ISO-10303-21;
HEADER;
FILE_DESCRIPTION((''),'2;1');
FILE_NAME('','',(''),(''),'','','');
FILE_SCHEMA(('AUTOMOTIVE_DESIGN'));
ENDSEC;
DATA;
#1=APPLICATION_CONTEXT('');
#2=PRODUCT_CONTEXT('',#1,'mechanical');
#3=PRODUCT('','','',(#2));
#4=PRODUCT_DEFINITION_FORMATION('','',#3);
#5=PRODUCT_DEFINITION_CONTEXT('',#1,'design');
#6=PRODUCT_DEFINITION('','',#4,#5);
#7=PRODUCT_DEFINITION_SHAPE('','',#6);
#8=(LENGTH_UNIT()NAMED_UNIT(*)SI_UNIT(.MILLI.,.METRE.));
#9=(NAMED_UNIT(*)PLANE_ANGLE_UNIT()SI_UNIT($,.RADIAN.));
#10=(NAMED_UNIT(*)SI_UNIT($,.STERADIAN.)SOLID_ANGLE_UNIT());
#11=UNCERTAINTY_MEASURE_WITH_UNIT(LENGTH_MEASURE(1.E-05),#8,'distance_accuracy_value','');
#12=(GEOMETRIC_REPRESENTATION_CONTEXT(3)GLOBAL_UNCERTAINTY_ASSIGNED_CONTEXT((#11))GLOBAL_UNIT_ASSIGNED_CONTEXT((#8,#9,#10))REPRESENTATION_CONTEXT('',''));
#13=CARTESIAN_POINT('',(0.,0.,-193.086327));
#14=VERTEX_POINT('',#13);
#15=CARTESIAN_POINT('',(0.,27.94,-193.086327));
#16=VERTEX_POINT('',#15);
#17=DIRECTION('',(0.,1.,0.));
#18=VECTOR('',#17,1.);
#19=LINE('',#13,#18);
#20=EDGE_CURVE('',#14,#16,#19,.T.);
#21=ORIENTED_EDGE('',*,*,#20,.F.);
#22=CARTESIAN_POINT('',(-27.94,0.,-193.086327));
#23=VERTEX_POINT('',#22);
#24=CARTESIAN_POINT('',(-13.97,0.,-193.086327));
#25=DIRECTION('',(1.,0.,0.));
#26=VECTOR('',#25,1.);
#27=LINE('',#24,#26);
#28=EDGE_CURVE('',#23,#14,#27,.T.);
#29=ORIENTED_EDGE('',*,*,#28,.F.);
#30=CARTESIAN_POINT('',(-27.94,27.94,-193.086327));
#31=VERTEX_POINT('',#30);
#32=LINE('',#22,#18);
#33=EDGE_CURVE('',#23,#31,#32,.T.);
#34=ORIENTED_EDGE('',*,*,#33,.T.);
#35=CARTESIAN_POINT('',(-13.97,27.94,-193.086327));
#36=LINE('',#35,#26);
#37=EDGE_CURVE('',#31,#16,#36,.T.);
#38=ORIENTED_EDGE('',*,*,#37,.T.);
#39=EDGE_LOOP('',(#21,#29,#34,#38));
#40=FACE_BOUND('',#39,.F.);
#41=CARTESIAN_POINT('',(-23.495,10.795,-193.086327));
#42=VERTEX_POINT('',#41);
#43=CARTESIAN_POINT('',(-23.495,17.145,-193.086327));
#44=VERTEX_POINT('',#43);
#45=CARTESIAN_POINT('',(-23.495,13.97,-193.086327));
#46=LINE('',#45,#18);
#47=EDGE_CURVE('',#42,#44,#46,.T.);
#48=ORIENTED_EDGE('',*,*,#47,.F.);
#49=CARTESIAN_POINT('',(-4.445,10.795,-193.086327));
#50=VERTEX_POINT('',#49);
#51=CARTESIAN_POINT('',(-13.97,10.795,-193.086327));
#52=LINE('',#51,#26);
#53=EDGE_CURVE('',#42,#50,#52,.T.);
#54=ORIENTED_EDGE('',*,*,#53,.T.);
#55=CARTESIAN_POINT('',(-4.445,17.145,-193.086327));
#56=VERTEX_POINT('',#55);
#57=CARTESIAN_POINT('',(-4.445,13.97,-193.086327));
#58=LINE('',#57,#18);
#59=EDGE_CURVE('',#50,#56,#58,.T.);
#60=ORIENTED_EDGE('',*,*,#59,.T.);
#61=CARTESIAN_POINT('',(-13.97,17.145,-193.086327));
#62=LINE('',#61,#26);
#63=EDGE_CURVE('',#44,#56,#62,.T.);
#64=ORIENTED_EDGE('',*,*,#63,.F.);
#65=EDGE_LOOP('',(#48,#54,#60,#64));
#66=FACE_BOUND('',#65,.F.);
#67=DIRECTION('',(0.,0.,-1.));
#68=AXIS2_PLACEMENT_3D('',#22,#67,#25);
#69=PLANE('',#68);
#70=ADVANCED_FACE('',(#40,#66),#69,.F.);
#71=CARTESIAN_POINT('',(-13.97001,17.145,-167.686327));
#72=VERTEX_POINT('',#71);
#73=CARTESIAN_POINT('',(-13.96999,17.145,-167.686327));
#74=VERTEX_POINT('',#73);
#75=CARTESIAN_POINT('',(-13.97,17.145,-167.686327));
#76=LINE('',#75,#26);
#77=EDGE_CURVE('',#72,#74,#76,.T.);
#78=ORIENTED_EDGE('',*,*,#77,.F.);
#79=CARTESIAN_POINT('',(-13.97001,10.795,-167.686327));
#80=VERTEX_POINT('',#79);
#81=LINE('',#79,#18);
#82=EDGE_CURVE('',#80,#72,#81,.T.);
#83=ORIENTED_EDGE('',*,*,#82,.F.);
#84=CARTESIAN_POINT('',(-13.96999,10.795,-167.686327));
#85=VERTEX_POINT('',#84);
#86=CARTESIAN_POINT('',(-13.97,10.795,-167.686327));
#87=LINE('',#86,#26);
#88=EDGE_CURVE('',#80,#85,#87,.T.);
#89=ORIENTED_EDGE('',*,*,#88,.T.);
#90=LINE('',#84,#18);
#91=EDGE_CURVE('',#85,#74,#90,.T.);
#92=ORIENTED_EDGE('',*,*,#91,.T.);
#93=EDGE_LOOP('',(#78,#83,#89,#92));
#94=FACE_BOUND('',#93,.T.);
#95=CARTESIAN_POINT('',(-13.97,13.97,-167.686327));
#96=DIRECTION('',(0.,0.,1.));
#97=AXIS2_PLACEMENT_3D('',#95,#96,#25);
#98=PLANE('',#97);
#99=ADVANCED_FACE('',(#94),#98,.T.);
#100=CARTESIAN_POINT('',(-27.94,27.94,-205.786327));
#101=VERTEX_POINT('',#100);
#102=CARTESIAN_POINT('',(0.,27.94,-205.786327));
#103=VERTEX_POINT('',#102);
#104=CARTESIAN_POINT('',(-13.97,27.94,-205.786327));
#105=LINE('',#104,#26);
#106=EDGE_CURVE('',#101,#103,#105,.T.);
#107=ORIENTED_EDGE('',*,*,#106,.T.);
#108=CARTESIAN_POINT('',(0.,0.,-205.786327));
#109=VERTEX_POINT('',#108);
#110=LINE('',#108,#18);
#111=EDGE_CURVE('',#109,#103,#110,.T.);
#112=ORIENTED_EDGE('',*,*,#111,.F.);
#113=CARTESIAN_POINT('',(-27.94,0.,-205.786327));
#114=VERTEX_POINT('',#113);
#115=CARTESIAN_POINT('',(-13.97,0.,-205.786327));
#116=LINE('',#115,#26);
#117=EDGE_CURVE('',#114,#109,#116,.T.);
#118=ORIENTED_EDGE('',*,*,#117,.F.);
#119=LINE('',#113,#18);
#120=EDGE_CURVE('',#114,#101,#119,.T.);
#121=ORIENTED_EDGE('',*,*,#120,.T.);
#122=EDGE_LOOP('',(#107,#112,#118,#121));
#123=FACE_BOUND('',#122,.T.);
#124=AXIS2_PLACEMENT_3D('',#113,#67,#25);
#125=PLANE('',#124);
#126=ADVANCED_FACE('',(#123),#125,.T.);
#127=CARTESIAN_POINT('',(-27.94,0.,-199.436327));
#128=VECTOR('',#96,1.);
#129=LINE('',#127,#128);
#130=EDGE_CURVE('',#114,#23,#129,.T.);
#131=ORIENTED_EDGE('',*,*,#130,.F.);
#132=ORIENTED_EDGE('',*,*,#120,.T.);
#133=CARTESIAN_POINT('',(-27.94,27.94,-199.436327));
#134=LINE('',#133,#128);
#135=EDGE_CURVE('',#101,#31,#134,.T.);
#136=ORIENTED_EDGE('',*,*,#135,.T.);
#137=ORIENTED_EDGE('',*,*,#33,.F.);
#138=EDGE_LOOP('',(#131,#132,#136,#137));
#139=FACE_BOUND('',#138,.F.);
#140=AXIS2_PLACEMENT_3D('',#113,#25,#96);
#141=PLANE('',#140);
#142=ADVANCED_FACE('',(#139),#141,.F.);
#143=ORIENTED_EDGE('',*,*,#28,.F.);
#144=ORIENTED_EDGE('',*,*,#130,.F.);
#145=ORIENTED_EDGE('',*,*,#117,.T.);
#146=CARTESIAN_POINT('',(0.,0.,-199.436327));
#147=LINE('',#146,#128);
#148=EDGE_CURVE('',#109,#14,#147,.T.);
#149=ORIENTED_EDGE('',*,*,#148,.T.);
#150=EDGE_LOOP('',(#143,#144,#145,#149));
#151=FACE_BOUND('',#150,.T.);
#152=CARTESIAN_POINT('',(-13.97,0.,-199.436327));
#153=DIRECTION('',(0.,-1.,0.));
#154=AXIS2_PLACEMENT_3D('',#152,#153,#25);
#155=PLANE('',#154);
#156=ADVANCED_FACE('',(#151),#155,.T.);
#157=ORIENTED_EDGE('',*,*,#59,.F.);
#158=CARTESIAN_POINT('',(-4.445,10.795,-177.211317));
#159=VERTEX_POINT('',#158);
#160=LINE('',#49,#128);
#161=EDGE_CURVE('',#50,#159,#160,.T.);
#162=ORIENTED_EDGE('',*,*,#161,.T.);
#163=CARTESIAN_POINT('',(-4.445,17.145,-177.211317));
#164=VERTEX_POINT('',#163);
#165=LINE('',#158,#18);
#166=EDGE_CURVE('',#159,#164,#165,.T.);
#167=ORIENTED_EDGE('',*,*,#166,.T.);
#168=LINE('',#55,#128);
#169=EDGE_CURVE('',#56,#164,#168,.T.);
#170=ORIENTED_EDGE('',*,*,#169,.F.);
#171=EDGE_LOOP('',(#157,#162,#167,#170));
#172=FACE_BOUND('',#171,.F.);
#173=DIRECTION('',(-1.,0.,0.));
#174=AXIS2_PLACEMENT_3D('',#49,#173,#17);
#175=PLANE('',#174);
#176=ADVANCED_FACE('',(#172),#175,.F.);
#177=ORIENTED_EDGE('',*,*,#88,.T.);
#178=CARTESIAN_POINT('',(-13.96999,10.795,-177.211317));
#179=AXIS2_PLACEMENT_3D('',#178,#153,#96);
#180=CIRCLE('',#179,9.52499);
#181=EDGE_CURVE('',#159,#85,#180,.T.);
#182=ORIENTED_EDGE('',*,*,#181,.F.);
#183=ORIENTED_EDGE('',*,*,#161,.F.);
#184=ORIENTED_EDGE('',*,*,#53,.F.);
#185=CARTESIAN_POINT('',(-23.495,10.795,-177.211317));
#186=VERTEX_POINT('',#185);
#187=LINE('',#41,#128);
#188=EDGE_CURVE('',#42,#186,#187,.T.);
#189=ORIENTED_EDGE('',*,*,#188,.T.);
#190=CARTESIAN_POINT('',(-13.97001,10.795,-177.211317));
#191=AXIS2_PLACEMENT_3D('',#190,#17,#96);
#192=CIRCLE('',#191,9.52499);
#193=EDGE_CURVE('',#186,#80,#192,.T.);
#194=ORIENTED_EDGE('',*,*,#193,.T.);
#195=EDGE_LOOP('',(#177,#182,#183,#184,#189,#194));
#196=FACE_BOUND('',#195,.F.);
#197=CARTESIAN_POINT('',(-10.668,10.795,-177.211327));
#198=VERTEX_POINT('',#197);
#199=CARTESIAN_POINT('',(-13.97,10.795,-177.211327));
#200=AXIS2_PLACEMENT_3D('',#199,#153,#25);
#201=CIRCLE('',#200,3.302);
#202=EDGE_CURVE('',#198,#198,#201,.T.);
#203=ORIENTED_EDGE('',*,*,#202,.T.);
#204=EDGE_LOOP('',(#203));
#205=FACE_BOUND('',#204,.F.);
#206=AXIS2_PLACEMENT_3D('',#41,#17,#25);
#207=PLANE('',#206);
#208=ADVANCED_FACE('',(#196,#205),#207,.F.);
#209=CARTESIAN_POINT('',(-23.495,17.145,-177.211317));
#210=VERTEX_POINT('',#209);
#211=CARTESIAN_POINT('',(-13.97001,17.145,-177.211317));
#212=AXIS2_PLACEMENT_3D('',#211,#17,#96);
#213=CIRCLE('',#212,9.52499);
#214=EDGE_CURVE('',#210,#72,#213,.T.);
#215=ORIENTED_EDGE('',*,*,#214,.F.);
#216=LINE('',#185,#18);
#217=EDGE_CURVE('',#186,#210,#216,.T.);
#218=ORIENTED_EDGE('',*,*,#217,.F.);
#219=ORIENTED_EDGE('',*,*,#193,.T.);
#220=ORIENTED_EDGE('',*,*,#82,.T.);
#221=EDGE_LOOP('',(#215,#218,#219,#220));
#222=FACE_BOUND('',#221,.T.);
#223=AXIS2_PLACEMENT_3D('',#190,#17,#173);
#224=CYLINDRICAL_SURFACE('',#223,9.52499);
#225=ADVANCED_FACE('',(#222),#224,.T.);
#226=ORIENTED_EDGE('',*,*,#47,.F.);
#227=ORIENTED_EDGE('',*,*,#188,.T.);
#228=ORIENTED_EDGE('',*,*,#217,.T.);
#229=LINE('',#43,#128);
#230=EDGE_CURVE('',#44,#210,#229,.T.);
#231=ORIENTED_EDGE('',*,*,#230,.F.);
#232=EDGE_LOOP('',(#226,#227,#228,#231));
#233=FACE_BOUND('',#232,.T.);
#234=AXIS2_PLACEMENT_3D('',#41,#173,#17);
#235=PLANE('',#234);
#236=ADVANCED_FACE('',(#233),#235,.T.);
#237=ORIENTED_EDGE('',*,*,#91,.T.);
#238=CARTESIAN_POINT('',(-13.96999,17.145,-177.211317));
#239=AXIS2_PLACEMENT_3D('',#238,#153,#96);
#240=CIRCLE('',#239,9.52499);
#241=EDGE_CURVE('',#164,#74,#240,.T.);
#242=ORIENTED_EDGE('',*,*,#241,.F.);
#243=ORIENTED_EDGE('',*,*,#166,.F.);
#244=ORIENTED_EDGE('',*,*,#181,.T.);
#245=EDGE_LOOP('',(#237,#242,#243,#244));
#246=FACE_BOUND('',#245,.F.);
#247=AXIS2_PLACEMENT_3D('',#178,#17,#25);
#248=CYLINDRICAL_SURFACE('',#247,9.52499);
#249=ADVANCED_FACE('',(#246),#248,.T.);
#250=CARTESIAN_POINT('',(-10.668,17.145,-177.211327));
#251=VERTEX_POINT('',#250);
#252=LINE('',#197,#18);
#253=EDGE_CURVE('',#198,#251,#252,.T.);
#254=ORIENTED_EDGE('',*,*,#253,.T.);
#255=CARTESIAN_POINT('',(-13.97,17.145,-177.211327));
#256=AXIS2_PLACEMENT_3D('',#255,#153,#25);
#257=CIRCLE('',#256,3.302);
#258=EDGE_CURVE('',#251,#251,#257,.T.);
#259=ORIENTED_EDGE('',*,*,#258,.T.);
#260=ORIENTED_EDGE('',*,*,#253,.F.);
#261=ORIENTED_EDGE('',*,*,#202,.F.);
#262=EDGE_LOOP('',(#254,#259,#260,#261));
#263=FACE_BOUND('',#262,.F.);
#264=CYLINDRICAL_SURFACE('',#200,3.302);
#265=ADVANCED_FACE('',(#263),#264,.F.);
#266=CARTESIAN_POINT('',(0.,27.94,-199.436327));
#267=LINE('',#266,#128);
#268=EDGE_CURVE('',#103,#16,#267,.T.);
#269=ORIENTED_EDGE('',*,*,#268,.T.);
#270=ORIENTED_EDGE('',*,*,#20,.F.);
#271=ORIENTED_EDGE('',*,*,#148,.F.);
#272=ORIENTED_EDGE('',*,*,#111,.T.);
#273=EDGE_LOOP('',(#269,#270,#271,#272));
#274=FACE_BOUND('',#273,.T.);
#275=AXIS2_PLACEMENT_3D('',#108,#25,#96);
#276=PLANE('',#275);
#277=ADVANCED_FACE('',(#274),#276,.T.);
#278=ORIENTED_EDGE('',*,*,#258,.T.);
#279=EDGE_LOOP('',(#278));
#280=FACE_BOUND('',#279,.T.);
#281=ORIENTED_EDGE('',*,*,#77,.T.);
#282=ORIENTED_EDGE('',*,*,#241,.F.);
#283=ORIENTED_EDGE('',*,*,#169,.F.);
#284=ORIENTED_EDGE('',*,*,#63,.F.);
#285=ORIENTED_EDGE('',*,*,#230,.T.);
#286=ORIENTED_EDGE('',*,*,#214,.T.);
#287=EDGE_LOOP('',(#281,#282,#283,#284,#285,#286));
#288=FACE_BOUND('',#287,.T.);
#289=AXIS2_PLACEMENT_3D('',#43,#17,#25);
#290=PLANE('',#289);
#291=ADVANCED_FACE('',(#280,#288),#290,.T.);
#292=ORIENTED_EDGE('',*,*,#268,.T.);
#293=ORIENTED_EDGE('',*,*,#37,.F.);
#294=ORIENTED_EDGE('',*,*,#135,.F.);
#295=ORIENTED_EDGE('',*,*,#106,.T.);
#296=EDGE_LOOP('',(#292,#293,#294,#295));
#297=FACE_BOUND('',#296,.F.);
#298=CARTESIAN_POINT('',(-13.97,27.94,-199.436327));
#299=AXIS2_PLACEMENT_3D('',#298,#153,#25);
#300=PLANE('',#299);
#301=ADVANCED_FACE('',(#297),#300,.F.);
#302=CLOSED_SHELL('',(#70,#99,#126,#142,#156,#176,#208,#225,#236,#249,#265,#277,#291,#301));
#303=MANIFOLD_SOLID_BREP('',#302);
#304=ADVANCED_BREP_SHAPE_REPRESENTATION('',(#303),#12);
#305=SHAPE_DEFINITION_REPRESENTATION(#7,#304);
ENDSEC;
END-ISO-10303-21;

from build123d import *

# Parameters (mm, degrees)
F0_W     = 27.94
F0_H     = 12.7
F1_DEPTH = 27.94
F2_W     = 19.05
F2_H     = 6.35
F3_DEPTH = 25.4
F4_R     = 9.52499
F5_R     = 3.302
F6_DEPTH = 6.35
F7_W     = 1.5875
F7_H     = 12.7
F8_DEPTH = 22.225


# Not quite as in the source:
# - a fillet or chamfer is up to 0.001 mm smaller than in the source, because OpenCascade refuses the exact size


with BuildPart() as f1:
    # F0 (on Front) → F1 (new body)
    with BuildSketch(Plane.XZ):
        with Locations((-13.97, -199.4363271219)):
            Rectangle(F0_W, F0_H)
    extrude(amount=-F1_DEPTH)

    # F2 (on face) → F3 (join)
    with BuildSketch(Plane.XY.offset(-193.0863271219)):
        with Locations((-13.97, 13.97)):
            Rectangle(F2_W, F2_H)
    extrude(amount=F3_DEPTH)

    # F4 (radius 9.525 in the source; OpenCascade refuses exactly that, so slightly less here)
    f4_edges = [f1.edges().sort_by_distance(p)[0] for p in [
        (-4.445, 13.97, -167.686327),
        (-23.495, 13.97, -167.686327),
    ]]
    fillet(f4_edges, radius=F4_R)

    # F5 (on face) → F6 (cut)
    with BuildSketch(Plane.XZ.offset(-10.795)):
        with Locations((-13.97, -177.2113271219)):
            Circle(F5_R)
    extrude(amount=-F6_DEPTH, mode=Mode.SUBTRACT)

    # F7 (on face) → F8 (cut)
    with BuildSketch(Plane(origin=(-27.94, 0, 0), x_dir=(0, -1, 0), z_dir=(-1, 0, 0))):
        with Locations((-25.55875, -177.2113271219)):
            Rectangle(F7_W, F7_H)
    extrude(amount=-F8_DEPTH, mode=Mode.SUBTRACT)


solid = f1.part
